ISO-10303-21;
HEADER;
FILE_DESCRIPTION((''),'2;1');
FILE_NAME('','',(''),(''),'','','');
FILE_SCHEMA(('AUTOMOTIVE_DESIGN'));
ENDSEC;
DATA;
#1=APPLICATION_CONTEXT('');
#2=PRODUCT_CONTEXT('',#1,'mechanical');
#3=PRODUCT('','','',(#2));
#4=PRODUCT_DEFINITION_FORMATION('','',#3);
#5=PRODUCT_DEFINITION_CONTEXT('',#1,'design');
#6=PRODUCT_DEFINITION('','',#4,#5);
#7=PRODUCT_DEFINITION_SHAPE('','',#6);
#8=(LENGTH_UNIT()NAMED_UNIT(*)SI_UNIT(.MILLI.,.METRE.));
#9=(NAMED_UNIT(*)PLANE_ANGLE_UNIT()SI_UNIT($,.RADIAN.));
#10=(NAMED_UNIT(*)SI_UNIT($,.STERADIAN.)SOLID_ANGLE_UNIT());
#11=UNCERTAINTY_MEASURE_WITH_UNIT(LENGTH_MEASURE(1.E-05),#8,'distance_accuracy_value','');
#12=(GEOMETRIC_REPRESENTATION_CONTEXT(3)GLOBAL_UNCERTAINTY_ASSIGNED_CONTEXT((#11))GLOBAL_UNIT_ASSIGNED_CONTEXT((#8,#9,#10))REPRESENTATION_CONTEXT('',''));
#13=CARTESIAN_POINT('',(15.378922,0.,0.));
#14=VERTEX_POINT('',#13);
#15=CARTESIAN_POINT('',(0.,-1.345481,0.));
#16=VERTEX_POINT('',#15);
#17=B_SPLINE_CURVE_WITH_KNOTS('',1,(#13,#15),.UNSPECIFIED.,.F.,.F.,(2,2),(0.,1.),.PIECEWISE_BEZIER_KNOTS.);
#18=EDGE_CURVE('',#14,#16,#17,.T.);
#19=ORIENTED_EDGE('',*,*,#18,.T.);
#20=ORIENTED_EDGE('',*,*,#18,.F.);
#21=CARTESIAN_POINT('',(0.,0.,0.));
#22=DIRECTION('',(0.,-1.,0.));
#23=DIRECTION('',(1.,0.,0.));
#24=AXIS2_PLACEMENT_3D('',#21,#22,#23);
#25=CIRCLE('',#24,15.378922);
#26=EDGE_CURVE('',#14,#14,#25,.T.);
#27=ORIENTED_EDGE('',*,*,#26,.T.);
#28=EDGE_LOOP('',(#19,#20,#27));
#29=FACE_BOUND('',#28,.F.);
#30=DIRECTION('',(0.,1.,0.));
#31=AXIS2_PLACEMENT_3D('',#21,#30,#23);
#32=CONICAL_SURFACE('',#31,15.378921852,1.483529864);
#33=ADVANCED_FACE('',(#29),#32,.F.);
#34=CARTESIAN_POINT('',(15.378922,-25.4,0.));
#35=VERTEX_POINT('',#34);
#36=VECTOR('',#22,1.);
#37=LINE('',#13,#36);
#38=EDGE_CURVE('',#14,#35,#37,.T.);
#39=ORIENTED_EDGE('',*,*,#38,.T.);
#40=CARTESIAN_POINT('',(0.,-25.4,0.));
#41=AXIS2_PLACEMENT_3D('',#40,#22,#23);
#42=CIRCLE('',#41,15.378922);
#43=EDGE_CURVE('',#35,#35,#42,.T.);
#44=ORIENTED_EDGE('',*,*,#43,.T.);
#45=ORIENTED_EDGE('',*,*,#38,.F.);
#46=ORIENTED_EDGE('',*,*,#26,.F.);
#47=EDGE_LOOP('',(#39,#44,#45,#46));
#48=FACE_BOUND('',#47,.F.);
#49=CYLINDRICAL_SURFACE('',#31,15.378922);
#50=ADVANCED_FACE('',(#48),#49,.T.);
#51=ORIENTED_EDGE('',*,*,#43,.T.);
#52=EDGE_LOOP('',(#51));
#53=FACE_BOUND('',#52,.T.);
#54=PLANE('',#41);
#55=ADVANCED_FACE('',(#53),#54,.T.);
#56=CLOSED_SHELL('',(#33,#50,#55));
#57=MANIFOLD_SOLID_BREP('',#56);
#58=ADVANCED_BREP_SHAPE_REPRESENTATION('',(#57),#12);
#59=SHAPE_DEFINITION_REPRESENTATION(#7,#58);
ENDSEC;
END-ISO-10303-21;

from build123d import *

# Parameters (mm, degrees)
F0_R     = 15.378921852
F1_DEPTH = 25.4


# Not quite as in the source:
# - an extrude whose draft closes it to a point is written as a loft to that point


with BuildPart() as f1:
    # F0 (on Front) → F1 (new body)
    with BuildSketch(Plane.XZ):
        Circle(F0_R)
    extrude(amount=F1_DEPTH)

    # F0 (on Front) → F2 section 0
    with BuildSketch(Plane.XZ, mode=Mode.PRIVATE) as f2_s0:
        Circle(F0_R)
    loft([f2_s0.sketch, Vertex(0, -1.3454813193, 0)], ruled=True, mode=Mode.SUBTRACT)


solid = f1.part
